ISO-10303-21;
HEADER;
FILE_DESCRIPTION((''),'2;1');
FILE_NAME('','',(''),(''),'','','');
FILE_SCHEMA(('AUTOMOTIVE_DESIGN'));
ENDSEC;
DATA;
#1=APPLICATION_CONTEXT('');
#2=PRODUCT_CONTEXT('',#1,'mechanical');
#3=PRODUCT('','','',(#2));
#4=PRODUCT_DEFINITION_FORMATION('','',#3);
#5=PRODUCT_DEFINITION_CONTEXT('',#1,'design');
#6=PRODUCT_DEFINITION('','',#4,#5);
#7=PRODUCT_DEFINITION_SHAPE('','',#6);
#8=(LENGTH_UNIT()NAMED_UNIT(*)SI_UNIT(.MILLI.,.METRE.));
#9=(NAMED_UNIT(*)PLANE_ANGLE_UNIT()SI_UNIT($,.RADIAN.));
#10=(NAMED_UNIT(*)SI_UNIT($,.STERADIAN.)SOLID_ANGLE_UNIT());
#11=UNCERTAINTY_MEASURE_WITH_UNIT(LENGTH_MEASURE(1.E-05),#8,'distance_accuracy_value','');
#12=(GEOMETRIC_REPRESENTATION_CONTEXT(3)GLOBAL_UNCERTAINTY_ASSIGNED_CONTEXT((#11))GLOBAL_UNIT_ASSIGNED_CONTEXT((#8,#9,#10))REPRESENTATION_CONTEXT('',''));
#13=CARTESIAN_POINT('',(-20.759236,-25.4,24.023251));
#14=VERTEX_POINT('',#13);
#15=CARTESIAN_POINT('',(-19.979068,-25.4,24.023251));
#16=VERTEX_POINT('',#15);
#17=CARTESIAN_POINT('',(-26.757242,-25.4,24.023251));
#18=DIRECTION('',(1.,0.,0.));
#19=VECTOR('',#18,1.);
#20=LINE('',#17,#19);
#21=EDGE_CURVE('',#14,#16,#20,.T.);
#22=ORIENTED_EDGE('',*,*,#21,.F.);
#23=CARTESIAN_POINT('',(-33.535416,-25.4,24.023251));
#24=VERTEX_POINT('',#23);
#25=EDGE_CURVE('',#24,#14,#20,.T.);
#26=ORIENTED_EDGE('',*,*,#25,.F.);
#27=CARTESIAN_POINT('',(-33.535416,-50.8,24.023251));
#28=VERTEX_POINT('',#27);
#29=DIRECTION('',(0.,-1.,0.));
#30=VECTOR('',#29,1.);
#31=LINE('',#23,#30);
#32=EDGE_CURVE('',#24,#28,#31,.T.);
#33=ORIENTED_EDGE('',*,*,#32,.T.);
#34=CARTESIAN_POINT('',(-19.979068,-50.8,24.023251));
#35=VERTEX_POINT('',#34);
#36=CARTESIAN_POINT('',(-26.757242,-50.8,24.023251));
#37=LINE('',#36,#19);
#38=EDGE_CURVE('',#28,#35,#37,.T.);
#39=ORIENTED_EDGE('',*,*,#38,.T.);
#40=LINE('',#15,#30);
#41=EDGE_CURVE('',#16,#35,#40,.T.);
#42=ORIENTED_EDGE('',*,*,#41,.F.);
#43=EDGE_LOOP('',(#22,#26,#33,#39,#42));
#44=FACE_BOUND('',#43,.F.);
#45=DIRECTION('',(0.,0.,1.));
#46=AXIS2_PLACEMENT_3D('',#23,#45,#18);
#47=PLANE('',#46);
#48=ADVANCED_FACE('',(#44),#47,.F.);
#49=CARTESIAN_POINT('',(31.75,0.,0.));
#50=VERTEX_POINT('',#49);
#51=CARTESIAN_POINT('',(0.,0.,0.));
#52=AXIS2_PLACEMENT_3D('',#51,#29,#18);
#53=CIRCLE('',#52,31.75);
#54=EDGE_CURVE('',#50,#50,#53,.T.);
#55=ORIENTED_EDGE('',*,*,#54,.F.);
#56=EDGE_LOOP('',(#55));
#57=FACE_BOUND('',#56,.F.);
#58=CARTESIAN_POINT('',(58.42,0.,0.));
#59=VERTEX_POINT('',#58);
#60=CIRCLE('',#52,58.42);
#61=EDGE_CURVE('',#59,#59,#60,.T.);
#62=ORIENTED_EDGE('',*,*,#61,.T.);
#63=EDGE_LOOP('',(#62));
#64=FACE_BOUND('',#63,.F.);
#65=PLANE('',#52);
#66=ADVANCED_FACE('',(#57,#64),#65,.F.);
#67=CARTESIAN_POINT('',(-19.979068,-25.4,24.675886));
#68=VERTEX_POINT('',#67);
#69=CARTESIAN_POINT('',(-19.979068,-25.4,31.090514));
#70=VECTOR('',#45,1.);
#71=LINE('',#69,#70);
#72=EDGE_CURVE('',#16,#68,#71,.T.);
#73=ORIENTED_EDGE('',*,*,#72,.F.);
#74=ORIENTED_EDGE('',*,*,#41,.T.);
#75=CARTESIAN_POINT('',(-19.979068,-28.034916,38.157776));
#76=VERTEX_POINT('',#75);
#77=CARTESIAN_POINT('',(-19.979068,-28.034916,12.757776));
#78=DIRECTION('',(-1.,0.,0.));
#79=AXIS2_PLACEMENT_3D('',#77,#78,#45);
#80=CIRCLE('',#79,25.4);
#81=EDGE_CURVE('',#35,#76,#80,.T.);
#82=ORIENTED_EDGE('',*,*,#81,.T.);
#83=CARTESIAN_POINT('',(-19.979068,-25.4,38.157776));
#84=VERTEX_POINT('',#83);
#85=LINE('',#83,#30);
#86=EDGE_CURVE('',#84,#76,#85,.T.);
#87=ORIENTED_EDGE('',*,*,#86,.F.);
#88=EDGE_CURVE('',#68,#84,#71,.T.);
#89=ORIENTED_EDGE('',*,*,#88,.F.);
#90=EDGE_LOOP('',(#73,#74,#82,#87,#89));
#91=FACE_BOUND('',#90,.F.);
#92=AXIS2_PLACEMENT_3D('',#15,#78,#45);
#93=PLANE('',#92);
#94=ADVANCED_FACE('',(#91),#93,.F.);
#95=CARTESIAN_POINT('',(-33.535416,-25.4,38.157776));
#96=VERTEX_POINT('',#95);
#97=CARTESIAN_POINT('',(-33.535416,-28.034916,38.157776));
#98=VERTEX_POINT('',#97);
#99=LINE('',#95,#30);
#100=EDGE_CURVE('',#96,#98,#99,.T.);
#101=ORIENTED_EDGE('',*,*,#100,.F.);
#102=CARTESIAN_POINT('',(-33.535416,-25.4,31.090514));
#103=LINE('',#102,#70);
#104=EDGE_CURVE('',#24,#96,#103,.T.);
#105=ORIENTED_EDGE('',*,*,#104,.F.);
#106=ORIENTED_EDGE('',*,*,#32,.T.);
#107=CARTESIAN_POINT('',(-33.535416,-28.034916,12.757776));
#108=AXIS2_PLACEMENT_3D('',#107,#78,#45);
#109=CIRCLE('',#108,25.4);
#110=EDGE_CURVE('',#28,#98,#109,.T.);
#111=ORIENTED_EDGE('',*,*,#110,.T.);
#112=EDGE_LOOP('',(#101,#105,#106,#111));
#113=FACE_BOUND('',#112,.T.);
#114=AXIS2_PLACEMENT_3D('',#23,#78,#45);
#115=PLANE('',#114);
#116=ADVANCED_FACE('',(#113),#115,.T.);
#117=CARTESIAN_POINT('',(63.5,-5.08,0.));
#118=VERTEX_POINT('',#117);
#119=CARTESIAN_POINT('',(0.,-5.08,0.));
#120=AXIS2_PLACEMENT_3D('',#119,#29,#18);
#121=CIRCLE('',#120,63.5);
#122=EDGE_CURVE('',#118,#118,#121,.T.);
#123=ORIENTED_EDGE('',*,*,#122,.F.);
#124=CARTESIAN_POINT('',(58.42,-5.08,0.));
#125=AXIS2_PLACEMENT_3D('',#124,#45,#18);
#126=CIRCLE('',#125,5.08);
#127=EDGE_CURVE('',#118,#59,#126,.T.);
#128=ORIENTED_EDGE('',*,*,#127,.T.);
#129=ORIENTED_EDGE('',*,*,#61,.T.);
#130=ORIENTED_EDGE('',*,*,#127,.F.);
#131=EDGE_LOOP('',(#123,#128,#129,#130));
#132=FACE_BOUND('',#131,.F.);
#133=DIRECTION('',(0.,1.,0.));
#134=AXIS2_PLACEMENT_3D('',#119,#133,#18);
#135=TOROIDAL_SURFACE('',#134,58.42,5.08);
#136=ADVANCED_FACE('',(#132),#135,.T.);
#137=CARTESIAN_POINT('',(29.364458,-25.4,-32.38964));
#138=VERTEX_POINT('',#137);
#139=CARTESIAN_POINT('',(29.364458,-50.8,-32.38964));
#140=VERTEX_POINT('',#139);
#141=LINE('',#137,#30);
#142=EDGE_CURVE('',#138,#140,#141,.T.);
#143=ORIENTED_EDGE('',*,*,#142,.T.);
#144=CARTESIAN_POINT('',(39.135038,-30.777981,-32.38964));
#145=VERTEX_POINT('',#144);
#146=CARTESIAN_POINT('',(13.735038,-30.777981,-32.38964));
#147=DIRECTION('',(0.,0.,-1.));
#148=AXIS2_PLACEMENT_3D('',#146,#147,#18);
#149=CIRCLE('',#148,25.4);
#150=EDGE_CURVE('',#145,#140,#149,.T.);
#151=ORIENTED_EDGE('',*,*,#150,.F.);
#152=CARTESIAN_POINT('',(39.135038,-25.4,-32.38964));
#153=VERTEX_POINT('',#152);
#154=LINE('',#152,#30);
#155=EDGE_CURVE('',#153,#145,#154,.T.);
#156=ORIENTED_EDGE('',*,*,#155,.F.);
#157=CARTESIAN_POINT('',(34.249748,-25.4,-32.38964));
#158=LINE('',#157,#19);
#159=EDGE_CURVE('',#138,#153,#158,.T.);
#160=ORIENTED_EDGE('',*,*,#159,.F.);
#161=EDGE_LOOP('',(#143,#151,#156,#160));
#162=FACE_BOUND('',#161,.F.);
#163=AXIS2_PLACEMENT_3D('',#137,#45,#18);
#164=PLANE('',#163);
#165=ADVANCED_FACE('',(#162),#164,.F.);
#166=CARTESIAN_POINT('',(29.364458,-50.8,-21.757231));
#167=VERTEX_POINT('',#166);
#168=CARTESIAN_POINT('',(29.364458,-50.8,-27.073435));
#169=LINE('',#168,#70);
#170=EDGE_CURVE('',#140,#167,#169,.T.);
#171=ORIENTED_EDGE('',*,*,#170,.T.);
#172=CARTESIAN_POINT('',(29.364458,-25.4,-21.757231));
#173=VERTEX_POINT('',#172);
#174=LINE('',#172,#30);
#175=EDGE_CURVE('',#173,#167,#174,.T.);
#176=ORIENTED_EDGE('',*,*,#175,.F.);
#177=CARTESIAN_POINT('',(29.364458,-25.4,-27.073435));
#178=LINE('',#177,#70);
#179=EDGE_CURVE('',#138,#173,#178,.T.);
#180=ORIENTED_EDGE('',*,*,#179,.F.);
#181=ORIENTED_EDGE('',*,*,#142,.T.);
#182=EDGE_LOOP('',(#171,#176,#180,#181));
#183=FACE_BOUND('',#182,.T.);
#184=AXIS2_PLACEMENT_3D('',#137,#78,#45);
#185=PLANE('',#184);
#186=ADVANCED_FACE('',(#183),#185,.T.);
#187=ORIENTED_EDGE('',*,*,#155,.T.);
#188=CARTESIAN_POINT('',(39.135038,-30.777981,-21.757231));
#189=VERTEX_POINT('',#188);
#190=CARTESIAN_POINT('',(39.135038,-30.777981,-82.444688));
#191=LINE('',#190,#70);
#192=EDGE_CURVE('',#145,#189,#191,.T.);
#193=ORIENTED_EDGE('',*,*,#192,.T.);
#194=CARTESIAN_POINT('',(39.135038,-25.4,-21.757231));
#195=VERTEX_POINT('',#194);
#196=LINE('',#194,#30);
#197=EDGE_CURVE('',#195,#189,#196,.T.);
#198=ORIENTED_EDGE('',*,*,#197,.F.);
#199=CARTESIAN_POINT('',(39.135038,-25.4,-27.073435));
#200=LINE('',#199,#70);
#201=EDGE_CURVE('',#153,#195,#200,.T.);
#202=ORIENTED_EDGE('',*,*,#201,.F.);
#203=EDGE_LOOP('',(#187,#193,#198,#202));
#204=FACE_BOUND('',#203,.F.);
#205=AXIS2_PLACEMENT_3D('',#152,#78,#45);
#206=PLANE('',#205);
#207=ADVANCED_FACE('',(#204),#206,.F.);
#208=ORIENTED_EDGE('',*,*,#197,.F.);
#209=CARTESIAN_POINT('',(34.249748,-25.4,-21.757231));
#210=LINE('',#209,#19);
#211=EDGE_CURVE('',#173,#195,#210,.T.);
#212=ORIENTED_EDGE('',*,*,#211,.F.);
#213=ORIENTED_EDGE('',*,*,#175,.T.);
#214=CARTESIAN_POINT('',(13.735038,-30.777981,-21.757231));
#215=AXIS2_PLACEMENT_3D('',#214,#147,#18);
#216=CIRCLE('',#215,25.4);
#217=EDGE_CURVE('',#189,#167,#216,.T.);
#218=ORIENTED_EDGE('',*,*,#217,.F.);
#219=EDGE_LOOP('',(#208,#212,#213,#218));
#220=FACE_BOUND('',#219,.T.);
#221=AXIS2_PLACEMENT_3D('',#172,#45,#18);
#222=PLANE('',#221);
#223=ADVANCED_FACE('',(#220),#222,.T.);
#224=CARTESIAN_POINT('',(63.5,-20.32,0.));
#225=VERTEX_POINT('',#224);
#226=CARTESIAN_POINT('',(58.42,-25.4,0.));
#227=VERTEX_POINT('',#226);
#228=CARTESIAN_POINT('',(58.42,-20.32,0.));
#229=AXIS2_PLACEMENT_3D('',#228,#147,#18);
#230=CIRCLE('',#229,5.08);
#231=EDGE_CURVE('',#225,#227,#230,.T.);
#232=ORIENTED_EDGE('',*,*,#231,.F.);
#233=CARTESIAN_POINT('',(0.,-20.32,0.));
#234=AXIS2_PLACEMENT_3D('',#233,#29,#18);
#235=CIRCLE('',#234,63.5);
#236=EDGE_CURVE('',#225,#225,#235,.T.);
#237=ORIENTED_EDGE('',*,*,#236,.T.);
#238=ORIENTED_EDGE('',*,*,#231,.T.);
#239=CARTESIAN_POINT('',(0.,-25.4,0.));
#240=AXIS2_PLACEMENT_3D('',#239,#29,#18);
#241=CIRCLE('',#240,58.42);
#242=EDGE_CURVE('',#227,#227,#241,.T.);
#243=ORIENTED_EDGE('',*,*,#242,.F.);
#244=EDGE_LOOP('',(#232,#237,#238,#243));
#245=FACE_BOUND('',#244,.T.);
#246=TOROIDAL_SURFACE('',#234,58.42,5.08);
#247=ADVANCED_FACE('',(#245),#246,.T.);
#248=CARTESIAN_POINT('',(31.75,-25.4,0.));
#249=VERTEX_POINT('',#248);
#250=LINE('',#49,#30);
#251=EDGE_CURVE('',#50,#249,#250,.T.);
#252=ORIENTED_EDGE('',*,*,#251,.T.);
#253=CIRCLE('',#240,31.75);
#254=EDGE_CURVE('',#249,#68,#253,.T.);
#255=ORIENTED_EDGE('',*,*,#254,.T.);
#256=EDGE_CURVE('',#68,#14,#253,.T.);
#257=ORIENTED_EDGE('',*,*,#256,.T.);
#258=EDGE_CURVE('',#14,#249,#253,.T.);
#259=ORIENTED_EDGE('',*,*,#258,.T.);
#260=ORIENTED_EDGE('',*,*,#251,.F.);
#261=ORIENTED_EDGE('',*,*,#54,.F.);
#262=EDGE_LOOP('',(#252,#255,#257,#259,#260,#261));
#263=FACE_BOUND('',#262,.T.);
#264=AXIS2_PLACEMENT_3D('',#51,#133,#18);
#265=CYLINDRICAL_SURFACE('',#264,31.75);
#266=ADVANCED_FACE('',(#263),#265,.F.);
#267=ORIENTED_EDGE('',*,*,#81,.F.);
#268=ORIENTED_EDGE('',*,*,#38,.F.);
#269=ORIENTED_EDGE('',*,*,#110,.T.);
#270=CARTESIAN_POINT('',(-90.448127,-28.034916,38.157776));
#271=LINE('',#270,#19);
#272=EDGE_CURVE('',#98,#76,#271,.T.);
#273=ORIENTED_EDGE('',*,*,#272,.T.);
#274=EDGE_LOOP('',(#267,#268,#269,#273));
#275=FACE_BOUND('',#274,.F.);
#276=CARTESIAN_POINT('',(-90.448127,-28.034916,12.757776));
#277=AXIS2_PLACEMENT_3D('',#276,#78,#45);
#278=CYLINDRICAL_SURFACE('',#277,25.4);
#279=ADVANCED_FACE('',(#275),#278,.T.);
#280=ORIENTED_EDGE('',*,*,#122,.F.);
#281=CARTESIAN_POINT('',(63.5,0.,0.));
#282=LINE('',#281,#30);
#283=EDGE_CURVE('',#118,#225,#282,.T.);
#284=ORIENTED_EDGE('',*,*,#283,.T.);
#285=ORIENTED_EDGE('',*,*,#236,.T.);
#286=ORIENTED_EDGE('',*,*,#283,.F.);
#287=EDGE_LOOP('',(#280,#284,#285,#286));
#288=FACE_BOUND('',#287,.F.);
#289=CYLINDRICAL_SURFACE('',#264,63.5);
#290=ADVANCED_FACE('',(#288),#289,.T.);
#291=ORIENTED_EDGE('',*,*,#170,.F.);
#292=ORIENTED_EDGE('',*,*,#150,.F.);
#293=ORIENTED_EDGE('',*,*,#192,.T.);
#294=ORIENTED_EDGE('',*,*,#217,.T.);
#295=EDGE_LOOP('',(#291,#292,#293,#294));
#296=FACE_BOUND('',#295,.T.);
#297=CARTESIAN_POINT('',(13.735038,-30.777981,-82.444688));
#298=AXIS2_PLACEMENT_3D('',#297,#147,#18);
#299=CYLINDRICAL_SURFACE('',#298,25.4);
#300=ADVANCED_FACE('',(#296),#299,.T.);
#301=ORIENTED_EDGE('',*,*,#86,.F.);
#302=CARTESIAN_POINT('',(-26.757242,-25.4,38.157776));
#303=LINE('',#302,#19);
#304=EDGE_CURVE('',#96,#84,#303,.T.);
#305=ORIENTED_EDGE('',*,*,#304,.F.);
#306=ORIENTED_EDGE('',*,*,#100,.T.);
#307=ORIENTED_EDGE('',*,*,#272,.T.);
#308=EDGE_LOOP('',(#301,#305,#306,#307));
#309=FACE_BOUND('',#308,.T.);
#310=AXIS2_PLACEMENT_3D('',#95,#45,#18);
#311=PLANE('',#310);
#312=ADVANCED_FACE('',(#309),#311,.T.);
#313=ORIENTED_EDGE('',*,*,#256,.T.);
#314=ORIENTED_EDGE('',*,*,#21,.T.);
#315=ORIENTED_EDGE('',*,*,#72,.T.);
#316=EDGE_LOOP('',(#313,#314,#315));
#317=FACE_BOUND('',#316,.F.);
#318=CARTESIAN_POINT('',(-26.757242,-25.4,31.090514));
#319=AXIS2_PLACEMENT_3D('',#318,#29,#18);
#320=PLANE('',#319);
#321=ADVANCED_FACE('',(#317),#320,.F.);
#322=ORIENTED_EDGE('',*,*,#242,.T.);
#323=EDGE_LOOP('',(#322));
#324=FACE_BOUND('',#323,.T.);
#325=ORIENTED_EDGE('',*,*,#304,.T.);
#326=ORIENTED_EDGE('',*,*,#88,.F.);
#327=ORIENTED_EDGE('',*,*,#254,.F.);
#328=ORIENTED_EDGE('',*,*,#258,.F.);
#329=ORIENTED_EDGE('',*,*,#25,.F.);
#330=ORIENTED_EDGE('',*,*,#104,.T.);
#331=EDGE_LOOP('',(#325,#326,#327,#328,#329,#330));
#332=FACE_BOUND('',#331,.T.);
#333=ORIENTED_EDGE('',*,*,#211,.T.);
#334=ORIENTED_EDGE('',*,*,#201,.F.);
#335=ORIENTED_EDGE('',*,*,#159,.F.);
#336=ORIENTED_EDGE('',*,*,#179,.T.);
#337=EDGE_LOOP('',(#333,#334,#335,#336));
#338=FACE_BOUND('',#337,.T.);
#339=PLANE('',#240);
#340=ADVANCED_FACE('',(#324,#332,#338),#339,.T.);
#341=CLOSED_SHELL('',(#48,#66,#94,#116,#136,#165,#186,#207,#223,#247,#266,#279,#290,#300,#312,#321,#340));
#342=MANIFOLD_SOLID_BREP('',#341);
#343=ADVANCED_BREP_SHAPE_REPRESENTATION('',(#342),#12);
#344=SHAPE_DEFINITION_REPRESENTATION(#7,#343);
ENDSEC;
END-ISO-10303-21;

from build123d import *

# Parameters (mm, degrees)
F0_R        = 63.5
F0_R_2      = 31.75
F1_DEPTH    = 25.4
F2_R        = 5.08
F3_R        = 5.08
F6_W        = 9.770580698
F6_H        = 10.6324088763
F6_W_2      = 13.55634837
F6_H_2      = 14.134524271
F7_DEPTH    = 25.4
F8_T1_DEPTH = 127.3817691468
F9_T1_DEPTH = 110.742504806


# Not quite as in the source:
# - a fillet or chamfer that OpenCascade refuses, or shapes differently, is made with other operations: its cross-section is extruded or revolved along the edge and cut away or added
# - the program builds the solid bodies; features that only make, move or delete a surface that nothing else refers to are left out


with BuildPart() as f1:
    # F0 (on Front) → F1 (new body)
    with BuildSketch(Plane.XZ):
        Circle(F0_R)
        Circle(F0_R_2, mode=Mode.SUBTRACT)
    extrude(amount=F1_DEPTH)

    # F2
    f2_edges = [f1.edges().sort_by_distance(p)[0] for p in [
        (-63.5, -25.4, 0),
    ]]
    fillet(f2_edges, radius=F2_R)

    # F3
    f3_edges = [f1.edges().sort_by_distance(p)[0] for p in [
        (-63.5, 0, 0),
    ]]
    fillet(f3_edges, radius=F3_R)

    # F6 (on face) → F7 (join)
    with BuildSketch(Plane.XZ.offset(25.4)):
        with Locations((34.2497480866, -27.0734353661)):
            Rectangle(F6_W, F6_H)
        with Locations((-26.7572421814, 31.0905136006)):
            Rectangle(F6_W_2, F6_H_2)
    extrude(amount=F7_DEPTH)

    # F8: fillet of radius 25.4 on 1 edges, made by hand

    # F8_s2 → F8_t1 (cut)
    with BuildSketch(Plane.YZ.offset(-90.4481267548)):
        with BuildLine():
            ThreePointArc((-28.0349158446, 38.1577757361), (-41.4329925067, 34.3367363635), (-50.8, 24.0232514651))
            Line((-50.8, 24.0232514651), (-50.8, 38.1577757361))
            Line((-50.8, 38.1577757361), (-28.0349158446, 38.1577757361))
        make_face()
    extrude(amount=F8_T1_DEPTH, mode=Mode.SUBTRACT)

    # F9: fillet of radius 25.4 on 1 edges, made by hand

    # F9_s2 → F9_t1 (cut)
    with BuildSketch(Plane.XY.offset(-82.4446877691)):
        with BuildLine():
            ThreePointArc((39.1350384356, -30.777980814), (36.5620755875, -41.9173872105), (29.3644577376, -50.8))
            Line((29.3644577376, -50.8), (39.1350384356, -50.8))
            Line((39.1350384356, -50.8), (39.1350384356, -30.777980814))
        make_face()
    extrude(amount=F9_T1_DEPTH, mode=Mode.SUBTRACT)


solid = f1.part
